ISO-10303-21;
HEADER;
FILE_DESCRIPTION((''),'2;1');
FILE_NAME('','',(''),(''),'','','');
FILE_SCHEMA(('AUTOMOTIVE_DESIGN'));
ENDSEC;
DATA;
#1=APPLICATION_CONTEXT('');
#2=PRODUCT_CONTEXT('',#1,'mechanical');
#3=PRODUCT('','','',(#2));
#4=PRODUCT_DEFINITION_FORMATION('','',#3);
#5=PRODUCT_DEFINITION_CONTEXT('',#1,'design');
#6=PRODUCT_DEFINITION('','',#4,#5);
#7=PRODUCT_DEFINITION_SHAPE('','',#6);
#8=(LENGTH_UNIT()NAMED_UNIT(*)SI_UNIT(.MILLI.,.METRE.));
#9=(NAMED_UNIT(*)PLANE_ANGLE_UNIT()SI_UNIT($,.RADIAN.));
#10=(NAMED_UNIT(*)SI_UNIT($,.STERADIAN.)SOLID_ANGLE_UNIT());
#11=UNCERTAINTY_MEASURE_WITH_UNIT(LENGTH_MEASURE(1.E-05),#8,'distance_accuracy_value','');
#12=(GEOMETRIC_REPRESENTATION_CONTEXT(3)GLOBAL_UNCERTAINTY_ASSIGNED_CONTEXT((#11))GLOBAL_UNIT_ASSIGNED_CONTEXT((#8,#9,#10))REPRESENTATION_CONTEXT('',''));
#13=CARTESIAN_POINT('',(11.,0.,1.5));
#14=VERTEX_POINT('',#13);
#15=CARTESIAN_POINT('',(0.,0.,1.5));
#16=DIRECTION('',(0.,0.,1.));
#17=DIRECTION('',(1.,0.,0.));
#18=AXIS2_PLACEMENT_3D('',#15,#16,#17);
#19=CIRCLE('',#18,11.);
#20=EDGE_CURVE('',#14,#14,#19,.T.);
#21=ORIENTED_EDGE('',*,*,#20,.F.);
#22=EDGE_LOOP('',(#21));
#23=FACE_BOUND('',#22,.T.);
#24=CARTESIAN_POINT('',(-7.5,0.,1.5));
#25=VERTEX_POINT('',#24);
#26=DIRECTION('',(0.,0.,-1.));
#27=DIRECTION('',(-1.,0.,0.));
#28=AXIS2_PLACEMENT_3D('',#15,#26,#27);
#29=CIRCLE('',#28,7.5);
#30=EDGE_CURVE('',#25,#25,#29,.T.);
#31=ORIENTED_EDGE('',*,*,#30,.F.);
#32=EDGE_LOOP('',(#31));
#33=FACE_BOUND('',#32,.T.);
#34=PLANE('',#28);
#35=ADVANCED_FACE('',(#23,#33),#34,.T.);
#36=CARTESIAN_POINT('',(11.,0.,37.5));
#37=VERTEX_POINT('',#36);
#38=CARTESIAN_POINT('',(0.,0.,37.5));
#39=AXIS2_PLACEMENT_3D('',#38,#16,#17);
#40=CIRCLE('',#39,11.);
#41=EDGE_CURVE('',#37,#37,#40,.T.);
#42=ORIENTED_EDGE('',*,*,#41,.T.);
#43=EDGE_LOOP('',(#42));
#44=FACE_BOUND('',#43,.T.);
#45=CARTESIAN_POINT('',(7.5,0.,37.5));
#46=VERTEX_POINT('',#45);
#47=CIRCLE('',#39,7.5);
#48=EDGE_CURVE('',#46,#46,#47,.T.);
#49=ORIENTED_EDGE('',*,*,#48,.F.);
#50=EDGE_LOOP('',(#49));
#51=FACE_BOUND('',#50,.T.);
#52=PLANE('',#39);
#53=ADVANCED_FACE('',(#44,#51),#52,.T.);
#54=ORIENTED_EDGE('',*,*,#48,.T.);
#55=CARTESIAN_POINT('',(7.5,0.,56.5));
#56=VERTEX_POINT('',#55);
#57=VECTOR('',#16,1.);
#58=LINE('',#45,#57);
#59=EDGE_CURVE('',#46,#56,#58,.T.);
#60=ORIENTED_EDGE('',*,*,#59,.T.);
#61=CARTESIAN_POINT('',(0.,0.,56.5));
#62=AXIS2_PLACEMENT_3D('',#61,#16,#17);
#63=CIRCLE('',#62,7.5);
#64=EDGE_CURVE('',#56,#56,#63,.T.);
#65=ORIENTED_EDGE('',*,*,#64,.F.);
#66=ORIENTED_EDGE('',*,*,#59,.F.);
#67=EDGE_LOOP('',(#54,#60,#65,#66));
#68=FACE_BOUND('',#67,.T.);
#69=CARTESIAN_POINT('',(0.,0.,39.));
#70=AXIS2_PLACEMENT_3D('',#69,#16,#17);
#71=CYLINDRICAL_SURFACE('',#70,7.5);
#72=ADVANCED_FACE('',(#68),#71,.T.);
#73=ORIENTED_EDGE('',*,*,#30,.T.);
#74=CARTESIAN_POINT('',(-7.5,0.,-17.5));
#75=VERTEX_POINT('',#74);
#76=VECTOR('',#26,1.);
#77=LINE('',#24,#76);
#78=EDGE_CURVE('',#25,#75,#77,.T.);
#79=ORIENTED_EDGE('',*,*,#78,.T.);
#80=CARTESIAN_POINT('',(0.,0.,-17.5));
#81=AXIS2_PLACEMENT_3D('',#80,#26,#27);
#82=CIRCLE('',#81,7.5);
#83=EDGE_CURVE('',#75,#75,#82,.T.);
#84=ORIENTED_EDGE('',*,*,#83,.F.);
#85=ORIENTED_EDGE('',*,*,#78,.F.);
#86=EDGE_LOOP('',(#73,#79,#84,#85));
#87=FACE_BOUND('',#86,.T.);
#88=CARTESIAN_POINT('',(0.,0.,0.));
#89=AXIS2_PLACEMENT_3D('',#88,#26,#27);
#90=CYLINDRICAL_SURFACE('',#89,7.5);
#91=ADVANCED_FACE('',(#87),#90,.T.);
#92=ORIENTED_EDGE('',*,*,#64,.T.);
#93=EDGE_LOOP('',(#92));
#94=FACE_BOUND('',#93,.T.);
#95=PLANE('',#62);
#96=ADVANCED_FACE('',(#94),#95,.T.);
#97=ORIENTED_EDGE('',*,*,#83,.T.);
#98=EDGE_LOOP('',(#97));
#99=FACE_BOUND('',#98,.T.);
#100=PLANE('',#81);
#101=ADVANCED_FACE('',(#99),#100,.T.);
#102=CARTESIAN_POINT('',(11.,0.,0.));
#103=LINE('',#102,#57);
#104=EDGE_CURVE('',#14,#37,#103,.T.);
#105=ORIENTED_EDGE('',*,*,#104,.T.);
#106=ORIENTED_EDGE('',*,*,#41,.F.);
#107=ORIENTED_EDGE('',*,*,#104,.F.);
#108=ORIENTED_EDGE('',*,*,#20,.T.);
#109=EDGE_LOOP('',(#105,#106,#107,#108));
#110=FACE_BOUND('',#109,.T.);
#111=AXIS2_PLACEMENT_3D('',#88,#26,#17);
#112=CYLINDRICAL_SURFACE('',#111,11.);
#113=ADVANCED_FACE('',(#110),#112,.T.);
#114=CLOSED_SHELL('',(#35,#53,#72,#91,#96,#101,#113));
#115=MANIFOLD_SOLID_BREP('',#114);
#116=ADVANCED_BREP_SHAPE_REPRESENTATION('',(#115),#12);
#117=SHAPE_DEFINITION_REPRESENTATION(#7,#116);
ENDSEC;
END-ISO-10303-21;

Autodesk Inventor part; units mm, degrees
ref_plane "YZ Plane" through (0, 0, 0) normal (1, 0, 0) x (0, 1, 0)
ref_plane "Start Plane" through (0, 0, 0) normal (0, 0, 1) x (1, 0, 0)
ref_plane "End Plane" through (0, 0, 39) normal (0, 0, 1) x (1, 0, 0)
sketch "Sketch" plane through (0, 0, 0) normal (0, 0, 1) x (1, 0, 0)
  circle A0 centre (0, 0) radius 11
  dimension "d0" = 22
extrude "Body" add sketch "Sketch" along normal up to surface (39 mm away) from surface at 0
sketch "Sketch3" plane through (0, 0, 0) normal (0, 0, 1) x (1, 0, 0)
  line L0 (0, 0) -> (10, 0)
ref_plane "Work Plane3" through (0, 0, 0) normal (0, -1, 0) x (1, 0, 0)
sketch "Sketch4" plane through (0, 0, 0) normal (0, -1, 0) x (1, 0, 0)
  line L0 (-2, 0) -> (12, 0)
  line L1 (-2, 39) -> (12, 39)
  dimension "d8" = 39
sketch "Sketch5" plane through (0, 0, 39) normal (0, 0, 1) x (1, 0, 0)
  circle A0 centre (0, 0) radius 7.5
  circle A1 centre (0, 0) radius 10.7703
  dimension "d9" = 15
extrude "Extrusion2" add sketch "Sketch5" along normal blind 17.5 contours A0
sketch "Sketch6" plane through (0, 0, 39) normal (0, 0, 1) x (1, 0, 0)
  circle A0 centre (0, 0) radius 11 projected
  circle A1 centre (0, 0) radius 7.5 projected
extrude "Extrusion3" cut sketch "Sketch6" against normal blind 1.5
sketch "Sketch7" plane through (0, 0, 0) normal (0, 0, -1) x (-1, 0, 0)
  circle A0 centre (0, 0) radius 7.5
  dimension "d16" = 15
extrude "Extrusion4" add sketch "Sketch7" along normal blind 17.5
sketch "Sketch8" plane through (0, 0, 0) normal (0, 0, -1) x (-1, 0, 0)
  circle A0 centre (0, 0) radius 7.5 projected
  circle A1 centre (0, 0) radius 11 projected
extrude "Extrusion5" cut sketch "Sketch8" against normal blind 1.5
equation "\"d0\" = G_H"
equation "\"d1\" = G_L"
equation "\"d16\" = d9"
equation "\"G_H\" = 22"
equation "\"G_L\" = d8"
equation "\"G_OFFSET_START\" = 0"
equation "\"G_OFFSET_END\" = 0"
equation "\"d5\" = G_OFFSET_END + B_L"
equation "\"B_L\" = 39"
equation "\"G_D\" = 22"
properties part number "ISO 1035/1 - 22 - 39" material "Steel, Mild"
